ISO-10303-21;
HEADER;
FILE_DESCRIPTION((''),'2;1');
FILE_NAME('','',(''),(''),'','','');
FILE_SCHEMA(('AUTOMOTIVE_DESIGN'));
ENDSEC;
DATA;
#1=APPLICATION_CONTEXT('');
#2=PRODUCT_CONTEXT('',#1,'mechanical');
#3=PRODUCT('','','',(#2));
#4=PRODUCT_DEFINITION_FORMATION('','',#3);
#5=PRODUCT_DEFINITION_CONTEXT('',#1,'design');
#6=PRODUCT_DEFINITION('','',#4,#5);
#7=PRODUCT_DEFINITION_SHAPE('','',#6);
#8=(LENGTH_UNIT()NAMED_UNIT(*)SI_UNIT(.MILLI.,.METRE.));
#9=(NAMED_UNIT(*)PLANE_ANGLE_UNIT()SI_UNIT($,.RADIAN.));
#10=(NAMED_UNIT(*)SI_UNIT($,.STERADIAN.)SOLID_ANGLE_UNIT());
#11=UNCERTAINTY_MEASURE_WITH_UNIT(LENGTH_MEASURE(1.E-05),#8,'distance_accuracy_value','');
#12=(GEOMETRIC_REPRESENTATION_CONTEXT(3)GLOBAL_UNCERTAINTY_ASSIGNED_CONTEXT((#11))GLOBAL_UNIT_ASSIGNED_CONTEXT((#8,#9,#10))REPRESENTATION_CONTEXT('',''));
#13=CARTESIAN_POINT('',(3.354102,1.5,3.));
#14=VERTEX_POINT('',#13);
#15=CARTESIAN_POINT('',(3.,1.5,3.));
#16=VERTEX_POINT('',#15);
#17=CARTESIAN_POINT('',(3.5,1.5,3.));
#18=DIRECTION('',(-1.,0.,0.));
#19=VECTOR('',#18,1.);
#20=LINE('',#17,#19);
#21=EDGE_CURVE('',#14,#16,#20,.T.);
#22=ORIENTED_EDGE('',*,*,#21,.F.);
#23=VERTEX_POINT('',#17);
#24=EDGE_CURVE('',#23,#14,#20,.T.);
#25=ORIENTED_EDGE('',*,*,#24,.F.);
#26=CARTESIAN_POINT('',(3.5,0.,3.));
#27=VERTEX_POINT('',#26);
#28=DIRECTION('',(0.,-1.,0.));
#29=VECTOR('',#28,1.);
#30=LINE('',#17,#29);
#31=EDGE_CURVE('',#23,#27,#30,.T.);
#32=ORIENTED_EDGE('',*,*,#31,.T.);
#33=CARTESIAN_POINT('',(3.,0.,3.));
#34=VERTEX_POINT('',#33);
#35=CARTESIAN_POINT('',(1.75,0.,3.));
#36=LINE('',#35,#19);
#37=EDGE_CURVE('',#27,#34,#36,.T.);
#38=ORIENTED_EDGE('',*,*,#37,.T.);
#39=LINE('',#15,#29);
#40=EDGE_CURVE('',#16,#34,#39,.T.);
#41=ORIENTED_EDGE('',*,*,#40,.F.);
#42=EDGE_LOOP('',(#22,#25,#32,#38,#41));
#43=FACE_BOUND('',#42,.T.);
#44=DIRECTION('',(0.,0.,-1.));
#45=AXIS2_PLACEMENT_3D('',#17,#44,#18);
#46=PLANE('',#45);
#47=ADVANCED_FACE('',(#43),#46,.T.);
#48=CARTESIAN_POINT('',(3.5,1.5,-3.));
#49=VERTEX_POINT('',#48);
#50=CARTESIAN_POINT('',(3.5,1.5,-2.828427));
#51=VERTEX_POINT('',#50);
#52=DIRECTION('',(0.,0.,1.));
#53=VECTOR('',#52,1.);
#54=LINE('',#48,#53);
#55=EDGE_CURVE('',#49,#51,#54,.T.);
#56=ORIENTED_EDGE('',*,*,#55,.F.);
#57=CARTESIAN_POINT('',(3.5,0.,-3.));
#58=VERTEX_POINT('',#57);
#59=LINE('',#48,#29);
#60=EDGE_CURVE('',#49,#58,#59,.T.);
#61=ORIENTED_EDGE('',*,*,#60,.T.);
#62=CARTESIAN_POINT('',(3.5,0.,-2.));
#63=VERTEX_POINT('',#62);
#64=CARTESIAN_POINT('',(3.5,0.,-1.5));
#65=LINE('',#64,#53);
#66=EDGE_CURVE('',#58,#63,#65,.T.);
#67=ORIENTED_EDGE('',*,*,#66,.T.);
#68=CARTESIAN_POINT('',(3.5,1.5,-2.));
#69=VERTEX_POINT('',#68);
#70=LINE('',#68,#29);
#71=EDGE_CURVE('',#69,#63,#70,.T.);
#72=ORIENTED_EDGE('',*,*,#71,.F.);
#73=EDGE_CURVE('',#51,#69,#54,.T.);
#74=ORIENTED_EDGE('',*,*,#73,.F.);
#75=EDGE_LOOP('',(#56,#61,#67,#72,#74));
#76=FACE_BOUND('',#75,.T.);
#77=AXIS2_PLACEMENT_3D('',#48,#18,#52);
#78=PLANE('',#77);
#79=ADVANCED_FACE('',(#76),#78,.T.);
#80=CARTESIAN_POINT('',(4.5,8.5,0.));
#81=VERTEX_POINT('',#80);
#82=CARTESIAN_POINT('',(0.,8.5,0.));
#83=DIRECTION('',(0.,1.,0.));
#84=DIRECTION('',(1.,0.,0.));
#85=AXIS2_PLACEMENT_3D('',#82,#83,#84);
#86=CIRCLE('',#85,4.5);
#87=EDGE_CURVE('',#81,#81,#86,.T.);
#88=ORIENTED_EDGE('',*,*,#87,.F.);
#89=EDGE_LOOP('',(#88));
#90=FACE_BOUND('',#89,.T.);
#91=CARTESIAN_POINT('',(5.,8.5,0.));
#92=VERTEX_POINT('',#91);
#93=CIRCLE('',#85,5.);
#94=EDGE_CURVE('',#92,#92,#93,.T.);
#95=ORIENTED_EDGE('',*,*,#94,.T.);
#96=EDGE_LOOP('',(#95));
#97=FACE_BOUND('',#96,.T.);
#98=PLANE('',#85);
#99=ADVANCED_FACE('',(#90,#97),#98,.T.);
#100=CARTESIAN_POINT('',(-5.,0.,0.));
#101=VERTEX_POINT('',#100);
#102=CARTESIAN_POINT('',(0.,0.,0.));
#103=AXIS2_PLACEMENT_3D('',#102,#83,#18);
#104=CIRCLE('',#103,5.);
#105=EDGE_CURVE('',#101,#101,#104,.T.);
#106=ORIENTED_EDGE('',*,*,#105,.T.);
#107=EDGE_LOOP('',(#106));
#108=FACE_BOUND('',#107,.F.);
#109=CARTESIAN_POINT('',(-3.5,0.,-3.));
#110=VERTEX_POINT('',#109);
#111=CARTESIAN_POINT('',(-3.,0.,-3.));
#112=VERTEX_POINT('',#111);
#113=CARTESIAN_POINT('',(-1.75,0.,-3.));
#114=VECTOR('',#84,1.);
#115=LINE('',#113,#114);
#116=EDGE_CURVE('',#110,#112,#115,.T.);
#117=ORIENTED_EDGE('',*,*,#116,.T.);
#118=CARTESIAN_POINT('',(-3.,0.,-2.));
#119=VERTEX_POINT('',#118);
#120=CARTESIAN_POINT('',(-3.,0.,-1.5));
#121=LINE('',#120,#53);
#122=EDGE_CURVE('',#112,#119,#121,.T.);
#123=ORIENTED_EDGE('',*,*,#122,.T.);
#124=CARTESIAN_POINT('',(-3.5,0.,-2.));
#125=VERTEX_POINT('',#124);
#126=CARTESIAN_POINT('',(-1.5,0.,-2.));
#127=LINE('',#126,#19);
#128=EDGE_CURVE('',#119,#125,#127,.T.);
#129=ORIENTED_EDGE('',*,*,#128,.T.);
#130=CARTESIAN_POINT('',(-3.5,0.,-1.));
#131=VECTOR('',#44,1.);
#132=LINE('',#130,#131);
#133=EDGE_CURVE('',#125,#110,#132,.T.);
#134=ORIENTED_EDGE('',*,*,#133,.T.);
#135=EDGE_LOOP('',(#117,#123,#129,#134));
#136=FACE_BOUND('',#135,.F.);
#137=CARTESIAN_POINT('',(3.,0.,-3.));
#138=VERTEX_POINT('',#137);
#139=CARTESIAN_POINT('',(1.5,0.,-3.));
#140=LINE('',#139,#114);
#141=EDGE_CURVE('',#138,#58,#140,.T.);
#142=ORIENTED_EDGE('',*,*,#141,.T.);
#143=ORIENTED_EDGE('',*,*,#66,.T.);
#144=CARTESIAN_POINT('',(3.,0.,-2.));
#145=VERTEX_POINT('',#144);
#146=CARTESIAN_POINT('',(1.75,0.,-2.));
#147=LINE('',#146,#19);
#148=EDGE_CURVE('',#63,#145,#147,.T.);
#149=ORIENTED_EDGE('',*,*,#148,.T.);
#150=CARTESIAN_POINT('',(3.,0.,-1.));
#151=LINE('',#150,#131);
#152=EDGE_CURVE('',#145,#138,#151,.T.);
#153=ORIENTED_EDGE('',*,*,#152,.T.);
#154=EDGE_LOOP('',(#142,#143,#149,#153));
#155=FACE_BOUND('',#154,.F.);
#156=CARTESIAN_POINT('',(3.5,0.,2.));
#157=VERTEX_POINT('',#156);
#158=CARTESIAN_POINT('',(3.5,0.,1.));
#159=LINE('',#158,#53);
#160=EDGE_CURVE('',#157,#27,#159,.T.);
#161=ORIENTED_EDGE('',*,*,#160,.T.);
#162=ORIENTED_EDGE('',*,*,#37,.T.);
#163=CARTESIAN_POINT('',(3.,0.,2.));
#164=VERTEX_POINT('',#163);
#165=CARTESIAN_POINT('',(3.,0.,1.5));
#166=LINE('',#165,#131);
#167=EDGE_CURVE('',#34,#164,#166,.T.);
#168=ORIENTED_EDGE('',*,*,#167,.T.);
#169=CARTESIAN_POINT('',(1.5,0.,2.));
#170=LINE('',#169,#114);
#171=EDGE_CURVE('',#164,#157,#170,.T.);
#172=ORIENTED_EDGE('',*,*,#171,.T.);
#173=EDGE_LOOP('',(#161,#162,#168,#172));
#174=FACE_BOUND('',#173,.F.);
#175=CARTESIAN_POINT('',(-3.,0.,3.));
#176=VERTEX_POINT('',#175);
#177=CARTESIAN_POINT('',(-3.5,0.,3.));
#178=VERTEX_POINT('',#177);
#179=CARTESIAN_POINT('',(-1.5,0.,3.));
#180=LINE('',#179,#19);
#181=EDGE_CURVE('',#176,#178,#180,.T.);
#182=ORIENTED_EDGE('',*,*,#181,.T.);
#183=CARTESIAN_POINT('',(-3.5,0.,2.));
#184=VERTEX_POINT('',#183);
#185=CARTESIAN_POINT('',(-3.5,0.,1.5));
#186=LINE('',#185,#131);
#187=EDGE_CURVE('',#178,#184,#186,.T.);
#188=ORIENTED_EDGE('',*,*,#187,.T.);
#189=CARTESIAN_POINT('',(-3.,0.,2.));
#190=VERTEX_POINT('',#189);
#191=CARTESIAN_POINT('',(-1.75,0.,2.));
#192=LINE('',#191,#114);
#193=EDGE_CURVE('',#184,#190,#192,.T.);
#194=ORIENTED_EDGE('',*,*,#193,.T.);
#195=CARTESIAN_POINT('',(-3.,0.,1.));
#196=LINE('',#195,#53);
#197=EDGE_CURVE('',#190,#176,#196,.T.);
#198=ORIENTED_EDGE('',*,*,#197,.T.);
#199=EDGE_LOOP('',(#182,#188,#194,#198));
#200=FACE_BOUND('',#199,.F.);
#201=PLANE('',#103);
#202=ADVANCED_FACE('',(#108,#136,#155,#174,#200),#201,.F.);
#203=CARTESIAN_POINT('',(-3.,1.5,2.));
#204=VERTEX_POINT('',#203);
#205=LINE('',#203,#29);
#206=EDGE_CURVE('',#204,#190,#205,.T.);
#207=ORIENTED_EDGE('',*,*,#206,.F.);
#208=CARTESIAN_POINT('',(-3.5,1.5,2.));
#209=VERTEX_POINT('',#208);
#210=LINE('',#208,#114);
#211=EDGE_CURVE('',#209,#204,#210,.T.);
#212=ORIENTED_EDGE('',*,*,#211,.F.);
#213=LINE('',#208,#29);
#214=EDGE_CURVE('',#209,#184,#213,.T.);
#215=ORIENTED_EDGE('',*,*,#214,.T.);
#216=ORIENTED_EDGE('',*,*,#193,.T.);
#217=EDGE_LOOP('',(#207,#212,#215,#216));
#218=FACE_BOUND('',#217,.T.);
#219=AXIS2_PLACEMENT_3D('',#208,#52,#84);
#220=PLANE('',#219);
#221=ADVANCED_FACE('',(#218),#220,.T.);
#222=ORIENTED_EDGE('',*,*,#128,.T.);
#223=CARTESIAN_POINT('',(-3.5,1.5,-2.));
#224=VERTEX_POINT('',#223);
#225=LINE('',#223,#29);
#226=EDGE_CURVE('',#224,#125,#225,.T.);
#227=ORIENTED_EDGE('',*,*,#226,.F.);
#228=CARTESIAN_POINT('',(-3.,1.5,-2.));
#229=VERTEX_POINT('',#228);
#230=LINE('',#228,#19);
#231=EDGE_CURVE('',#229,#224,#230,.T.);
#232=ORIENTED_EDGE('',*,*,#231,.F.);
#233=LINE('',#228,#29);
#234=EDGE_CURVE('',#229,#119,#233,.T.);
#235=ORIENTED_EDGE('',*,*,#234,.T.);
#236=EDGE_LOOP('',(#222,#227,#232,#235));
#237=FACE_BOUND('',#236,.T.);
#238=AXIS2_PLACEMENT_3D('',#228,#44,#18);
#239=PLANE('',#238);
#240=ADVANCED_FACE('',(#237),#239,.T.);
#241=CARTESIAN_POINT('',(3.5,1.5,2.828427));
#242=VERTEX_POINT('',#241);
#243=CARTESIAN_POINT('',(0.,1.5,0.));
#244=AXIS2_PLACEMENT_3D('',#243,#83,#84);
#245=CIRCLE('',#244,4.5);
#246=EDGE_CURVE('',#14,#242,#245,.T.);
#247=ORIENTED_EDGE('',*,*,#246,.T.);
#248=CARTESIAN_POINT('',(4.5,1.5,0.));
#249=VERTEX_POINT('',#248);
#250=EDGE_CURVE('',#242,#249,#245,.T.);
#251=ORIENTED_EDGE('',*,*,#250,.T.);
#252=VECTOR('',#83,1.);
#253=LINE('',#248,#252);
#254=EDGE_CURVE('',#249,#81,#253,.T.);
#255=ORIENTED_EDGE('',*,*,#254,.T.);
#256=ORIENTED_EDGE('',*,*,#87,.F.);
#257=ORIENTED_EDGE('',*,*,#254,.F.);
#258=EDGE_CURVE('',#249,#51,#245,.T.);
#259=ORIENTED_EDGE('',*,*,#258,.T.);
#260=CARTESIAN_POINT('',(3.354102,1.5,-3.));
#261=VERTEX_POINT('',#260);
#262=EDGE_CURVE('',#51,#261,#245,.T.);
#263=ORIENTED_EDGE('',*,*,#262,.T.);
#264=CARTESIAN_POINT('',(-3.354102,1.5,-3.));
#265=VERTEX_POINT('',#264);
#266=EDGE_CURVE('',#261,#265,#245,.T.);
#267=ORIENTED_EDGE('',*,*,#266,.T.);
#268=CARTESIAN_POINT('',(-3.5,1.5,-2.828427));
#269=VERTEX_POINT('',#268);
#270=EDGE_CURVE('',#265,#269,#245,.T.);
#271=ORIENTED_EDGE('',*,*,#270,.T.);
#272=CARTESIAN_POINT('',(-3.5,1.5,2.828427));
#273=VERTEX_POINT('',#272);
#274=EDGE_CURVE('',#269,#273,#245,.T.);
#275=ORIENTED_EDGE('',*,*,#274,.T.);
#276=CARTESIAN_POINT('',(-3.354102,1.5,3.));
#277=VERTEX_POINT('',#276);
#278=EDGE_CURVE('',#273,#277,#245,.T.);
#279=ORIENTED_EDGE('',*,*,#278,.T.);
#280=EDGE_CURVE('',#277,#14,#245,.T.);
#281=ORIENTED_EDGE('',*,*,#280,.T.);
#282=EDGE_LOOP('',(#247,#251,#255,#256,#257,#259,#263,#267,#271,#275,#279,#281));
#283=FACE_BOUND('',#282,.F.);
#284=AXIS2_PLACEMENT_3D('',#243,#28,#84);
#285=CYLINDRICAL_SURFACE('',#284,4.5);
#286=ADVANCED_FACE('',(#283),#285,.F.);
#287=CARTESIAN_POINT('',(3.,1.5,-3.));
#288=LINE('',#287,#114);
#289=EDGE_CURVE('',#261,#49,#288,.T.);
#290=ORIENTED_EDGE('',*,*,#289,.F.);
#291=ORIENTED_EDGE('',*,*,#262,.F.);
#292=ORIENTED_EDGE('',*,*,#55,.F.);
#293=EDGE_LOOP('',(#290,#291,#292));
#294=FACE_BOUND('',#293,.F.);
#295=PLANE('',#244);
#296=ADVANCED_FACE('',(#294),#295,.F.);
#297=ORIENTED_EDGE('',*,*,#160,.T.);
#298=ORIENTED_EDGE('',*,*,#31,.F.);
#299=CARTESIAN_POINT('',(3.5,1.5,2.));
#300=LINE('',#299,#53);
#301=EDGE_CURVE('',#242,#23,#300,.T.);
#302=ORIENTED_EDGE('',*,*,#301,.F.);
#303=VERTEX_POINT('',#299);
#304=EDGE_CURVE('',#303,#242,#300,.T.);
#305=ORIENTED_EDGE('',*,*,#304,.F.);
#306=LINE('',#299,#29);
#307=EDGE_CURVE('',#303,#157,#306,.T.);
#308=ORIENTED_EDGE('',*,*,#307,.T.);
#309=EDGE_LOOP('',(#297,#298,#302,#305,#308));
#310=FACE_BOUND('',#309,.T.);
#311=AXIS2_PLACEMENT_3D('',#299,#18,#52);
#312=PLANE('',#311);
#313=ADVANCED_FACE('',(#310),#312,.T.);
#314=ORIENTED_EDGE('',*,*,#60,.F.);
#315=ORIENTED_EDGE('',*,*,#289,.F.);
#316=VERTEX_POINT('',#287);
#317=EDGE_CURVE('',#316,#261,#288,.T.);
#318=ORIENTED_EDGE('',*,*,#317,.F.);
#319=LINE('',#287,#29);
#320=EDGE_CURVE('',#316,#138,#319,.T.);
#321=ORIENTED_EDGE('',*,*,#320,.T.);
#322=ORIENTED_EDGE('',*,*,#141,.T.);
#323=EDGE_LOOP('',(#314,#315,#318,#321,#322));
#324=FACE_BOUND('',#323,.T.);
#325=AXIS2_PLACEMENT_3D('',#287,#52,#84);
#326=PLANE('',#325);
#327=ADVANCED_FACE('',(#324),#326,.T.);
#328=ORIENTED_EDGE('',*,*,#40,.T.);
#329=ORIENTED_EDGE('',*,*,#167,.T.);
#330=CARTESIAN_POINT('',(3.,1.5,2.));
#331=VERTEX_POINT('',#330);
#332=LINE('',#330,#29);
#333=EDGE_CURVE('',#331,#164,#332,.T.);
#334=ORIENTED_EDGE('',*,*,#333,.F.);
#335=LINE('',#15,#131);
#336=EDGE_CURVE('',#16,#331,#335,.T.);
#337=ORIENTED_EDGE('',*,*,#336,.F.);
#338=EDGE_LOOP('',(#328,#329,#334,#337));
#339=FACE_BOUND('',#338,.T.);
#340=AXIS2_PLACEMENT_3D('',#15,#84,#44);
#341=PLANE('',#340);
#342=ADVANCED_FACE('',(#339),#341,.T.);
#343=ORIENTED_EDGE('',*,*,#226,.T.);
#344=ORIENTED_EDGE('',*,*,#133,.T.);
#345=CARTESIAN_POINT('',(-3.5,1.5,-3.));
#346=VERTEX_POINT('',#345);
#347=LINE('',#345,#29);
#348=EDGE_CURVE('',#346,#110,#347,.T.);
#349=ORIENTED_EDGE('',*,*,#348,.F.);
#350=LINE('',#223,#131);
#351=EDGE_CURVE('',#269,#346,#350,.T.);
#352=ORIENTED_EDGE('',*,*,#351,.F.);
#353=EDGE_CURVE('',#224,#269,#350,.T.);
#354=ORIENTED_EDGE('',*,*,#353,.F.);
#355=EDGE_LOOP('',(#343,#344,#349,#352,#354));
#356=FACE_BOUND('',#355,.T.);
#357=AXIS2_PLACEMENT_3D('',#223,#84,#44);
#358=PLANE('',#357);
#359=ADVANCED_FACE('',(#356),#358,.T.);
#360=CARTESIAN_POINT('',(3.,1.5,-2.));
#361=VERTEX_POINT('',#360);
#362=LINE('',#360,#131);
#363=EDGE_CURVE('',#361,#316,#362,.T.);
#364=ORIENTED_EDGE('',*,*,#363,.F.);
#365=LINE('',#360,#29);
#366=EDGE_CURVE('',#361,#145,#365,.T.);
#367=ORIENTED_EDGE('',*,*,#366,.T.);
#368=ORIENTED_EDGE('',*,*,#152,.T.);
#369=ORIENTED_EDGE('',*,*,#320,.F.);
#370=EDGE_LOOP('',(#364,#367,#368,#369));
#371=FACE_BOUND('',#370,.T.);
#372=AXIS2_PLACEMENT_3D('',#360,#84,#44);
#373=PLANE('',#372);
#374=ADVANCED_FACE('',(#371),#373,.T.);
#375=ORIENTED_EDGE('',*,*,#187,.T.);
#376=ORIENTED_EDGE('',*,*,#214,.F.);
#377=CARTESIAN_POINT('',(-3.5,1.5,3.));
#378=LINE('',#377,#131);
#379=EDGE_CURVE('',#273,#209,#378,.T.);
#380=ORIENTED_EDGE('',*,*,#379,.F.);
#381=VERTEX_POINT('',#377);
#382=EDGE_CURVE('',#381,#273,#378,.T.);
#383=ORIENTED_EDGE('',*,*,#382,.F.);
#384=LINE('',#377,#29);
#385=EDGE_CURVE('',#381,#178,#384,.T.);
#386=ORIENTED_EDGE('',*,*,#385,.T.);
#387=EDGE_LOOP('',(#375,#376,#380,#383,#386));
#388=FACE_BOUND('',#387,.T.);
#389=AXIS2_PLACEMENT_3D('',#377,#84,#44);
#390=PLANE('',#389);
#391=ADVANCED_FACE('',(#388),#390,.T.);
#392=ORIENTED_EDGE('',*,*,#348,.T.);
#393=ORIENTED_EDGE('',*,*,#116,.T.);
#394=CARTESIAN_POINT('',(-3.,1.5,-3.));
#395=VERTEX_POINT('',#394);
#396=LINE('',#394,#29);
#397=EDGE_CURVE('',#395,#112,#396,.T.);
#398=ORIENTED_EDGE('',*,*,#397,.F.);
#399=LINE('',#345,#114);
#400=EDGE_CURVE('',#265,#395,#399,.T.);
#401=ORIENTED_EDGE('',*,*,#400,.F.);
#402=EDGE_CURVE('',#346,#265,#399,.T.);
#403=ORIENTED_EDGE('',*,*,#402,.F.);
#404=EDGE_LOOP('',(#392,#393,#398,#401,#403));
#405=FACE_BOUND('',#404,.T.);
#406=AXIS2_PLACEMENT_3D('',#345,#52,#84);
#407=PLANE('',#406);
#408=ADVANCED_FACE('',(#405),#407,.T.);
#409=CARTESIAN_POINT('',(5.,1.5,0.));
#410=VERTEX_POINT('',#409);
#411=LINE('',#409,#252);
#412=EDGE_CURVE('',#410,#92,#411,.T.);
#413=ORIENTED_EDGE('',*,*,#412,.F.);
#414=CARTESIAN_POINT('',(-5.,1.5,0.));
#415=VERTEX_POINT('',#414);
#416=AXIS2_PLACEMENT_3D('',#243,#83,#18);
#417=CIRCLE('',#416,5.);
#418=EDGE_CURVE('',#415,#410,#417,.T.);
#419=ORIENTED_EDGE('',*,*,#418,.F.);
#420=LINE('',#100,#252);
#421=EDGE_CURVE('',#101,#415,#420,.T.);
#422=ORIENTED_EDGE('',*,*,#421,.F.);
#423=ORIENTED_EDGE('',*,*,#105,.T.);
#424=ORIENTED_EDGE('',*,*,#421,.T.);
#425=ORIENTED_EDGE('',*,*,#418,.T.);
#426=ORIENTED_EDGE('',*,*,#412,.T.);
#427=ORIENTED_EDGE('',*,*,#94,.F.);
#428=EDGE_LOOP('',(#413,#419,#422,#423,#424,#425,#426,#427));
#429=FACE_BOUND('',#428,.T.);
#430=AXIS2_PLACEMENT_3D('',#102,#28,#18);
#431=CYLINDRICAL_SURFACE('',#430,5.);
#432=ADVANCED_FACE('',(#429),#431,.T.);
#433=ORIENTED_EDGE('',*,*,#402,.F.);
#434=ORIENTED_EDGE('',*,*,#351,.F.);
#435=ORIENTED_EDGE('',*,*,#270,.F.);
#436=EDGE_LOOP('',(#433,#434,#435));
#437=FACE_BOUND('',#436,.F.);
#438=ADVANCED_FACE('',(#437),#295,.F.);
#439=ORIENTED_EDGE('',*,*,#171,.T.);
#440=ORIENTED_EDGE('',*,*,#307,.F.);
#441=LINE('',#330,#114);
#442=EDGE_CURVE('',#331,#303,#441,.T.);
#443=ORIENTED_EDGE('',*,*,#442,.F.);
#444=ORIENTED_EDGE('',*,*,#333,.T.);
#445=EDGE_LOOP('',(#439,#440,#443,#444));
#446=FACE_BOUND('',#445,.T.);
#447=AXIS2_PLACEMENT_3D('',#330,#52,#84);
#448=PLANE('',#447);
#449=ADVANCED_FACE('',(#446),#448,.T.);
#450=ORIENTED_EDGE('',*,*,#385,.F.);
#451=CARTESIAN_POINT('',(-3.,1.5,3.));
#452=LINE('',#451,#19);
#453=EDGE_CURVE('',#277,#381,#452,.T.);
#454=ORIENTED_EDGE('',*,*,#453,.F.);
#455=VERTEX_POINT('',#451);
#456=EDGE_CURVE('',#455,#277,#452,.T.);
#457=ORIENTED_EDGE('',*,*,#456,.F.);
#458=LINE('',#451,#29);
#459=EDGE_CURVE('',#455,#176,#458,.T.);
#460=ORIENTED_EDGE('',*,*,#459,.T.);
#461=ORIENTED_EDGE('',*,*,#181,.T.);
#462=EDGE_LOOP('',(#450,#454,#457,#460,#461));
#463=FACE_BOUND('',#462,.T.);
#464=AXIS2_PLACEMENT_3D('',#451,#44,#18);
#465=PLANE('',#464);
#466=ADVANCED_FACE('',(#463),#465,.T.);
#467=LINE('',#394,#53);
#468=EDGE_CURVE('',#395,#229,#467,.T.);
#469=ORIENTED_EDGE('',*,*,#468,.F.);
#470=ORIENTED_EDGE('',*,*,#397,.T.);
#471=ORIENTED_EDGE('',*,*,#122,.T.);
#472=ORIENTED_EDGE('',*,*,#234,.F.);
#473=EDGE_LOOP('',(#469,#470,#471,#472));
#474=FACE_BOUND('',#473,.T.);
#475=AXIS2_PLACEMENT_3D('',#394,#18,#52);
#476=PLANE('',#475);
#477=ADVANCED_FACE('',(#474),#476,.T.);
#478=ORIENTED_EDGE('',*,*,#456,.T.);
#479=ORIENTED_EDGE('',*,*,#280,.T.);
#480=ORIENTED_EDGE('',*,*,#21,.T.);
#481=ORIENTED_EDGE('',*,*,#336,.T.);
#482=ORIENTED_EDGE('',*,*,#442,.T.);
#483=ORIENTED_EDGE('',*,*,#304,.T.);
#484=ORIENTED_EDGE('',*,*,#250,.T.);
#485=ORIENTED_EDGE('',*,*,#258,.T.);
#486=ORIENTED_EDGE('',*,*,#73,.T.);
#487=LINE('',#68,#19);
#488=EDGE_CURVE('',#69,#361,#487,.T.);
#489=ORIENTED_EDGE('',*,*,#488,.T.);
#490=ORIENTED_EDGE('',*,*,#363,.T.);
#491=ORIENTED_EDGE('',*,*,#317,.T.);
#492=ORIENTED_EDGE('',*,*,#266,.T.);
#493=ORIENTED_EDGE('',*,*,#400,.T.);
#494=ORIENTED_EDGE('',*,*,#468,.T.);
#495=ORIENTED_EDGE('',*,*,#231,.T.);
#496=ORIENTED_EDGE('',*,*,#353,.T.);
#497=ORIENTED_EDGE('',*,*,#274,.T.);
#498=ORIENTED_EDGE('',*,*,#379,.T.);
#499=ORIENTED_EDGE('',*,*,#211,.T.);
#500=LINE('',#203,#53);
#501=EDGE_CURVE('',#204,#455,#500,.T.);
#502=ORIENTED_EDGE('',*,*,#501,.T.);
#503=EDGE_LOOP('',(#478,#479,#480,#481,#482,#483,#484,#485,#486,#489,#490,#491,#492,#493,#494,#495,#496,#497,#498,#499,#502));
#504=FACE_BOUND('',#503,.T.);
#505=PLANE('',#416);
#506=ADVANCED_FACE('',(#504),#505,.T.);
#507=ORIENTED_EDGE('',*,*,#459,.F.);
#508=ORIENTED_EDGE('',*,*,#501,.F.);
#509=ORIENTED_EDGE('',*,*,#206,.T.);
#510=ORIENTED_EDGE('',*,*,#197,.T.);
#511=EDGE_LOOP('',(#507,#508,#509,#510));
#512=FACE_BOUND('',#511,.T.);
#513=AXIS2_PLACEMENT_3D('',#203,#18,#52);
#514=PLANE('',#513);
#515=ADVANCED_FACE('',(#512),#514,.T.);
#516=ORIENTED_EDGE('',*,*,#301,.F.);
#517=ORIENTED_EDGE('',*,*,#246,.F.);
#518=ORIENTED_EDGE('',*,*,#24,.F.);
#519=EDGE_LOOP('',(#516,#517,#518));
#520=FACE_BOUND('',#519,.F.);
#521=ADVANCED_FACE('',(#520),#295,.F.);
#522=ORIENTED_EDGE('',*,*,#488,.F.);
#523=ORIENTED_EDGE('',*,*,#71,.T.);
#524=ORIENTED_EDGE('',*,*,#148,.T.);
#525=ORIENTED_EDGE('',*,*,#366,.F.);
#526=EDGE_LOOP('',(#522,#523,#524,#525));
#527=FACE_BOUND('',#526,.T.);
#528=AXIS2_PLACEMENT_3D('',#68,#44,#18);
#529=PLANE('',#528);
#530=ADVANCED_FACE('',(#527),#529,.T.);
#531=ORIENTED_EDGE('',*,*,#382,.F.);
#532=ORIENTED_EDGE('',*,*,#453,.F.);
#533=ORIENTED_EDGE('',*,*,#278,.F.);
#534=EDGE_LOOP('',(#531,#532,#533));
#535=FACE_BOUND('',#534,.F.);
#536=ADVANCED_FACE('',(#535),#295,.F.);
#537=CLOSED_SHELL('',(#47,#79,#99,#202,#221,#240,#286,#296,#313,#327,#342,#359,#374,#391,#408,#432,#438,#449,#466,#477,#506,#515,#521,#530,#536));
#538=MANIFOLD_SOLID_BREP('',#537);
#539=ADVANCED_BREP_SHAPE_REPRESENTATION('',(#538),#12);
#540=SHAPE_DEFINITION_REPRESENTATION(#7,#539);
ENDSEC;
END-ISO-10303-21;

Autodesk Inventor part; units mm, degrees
ref_plane "YZ Plane" through (0, 0, 0) normal (1, 0, 0) x (0, 1, 0)
ref_plane "XZ Plane" through (0, 0, 0) normal (0, 1, 0) x (-1, 0, 0)
ref_plane "XY Plane" through (0, 0, 0) normal (0, 0, 1) x (1, 0, 0)
sketch "Sketch1" plane through (0, 0, 0) normal (0, 1, 0) x (-1, 0, 0)
  circle A0 centre (0, 0) radius 5
  dimension "d0" = 10
sketch "Sketch2" plane through (0, 0, 0) normal (0, 1, 0) x (-1, 0, 0)
  point P0 (0, 0)
extrude "Extrusion1" add sketch "Sketch1" along normal blind 1.5
sketch "Sketch3" plane through (0, 1.5, 0) normal (0, 1, 0) x (1, 0, 0)
  circle A0 centre (0, 0) radius 4.5
  circle A1 centre (0, 0) radius 5
  dimension "d3" = 9
extrude "Extrusion2" add sketch "Sketch3" along normal blind 7
sketch "Sketch4" plane through (0, 1.5, 0) normal (0, 1, 0) x (1, 0, 0)
  line L0 (3, 3) -> (3.5, 3)
  line L1 (3.5, 3) -> (3.5, 2)
  line L2 (3.5, 2) -> (3, 2)
  line L3 (3, 2) -> (3, 3)
  line L4 (3, 3) -> (3.5, 2) construction
  line L5 (3.5, 3) -> (3, 2) construction
  line L6 (-3.5, 3) -> (-3, 3)
  line L7 (-3, 3) -> (-3, 2)
  line L8 (-3, 2) -> (-3.5, 2)
  line L9 (-3.5, 2) -> (-3.5, 3)
  line L10 (-3.5, 3) -> (-3, 2) construction
  line L11 (-3, 3) -> (-3.5, 2) construction
  line L12 (-3.5, -2) -> (-3, -2)
  line L13 (-3, -2) -> (-3, -3)
  line L14 (-3, -3) -> (-3.5, -3)
  line L15 (-3.5, -3) -> (-3.5, -2)
  line L16 (-3.5, -2) -> (-3, -3) construction
  line L17 (-3, -2) -> (-3.5, -3) construction
  line L18 (3, -2) -> (3.5, -2)
  line L19 (3.5, -2) -> (3.5, -3)
  line L20 (3.5, -3) -> (3, -3)
  line L21 (3, -3) -> (3, -2)
  point P0 (0, 0)
  point P1 (3.25, 2.5)
  point P2 (-3.25, 2.5)
  point P3 (-3.25, -2.5)
  dimension "d8" = 0.5
  dimension "d9" = 1
  dimension "d10" = 0.5
  dimension "d11" = 1
  dimension "d12" = 0.5
  dimension "d13" = 1
  dimension "d15" = 6
  dimension "d16" = 7
  dimension "d17" = 0
  dimension "d18" = 0
  dimension "d20" = 0.5
  dimension "d21" = 1
  dimension "d22" = 7
  dimension "d23" = 0
  dimension "d24" = 3.5
  dimension "d26" = 3
extrude "Extrusion3" cut sketch "Sketch4" against normal blind 7
properties part number "button_bottom"
